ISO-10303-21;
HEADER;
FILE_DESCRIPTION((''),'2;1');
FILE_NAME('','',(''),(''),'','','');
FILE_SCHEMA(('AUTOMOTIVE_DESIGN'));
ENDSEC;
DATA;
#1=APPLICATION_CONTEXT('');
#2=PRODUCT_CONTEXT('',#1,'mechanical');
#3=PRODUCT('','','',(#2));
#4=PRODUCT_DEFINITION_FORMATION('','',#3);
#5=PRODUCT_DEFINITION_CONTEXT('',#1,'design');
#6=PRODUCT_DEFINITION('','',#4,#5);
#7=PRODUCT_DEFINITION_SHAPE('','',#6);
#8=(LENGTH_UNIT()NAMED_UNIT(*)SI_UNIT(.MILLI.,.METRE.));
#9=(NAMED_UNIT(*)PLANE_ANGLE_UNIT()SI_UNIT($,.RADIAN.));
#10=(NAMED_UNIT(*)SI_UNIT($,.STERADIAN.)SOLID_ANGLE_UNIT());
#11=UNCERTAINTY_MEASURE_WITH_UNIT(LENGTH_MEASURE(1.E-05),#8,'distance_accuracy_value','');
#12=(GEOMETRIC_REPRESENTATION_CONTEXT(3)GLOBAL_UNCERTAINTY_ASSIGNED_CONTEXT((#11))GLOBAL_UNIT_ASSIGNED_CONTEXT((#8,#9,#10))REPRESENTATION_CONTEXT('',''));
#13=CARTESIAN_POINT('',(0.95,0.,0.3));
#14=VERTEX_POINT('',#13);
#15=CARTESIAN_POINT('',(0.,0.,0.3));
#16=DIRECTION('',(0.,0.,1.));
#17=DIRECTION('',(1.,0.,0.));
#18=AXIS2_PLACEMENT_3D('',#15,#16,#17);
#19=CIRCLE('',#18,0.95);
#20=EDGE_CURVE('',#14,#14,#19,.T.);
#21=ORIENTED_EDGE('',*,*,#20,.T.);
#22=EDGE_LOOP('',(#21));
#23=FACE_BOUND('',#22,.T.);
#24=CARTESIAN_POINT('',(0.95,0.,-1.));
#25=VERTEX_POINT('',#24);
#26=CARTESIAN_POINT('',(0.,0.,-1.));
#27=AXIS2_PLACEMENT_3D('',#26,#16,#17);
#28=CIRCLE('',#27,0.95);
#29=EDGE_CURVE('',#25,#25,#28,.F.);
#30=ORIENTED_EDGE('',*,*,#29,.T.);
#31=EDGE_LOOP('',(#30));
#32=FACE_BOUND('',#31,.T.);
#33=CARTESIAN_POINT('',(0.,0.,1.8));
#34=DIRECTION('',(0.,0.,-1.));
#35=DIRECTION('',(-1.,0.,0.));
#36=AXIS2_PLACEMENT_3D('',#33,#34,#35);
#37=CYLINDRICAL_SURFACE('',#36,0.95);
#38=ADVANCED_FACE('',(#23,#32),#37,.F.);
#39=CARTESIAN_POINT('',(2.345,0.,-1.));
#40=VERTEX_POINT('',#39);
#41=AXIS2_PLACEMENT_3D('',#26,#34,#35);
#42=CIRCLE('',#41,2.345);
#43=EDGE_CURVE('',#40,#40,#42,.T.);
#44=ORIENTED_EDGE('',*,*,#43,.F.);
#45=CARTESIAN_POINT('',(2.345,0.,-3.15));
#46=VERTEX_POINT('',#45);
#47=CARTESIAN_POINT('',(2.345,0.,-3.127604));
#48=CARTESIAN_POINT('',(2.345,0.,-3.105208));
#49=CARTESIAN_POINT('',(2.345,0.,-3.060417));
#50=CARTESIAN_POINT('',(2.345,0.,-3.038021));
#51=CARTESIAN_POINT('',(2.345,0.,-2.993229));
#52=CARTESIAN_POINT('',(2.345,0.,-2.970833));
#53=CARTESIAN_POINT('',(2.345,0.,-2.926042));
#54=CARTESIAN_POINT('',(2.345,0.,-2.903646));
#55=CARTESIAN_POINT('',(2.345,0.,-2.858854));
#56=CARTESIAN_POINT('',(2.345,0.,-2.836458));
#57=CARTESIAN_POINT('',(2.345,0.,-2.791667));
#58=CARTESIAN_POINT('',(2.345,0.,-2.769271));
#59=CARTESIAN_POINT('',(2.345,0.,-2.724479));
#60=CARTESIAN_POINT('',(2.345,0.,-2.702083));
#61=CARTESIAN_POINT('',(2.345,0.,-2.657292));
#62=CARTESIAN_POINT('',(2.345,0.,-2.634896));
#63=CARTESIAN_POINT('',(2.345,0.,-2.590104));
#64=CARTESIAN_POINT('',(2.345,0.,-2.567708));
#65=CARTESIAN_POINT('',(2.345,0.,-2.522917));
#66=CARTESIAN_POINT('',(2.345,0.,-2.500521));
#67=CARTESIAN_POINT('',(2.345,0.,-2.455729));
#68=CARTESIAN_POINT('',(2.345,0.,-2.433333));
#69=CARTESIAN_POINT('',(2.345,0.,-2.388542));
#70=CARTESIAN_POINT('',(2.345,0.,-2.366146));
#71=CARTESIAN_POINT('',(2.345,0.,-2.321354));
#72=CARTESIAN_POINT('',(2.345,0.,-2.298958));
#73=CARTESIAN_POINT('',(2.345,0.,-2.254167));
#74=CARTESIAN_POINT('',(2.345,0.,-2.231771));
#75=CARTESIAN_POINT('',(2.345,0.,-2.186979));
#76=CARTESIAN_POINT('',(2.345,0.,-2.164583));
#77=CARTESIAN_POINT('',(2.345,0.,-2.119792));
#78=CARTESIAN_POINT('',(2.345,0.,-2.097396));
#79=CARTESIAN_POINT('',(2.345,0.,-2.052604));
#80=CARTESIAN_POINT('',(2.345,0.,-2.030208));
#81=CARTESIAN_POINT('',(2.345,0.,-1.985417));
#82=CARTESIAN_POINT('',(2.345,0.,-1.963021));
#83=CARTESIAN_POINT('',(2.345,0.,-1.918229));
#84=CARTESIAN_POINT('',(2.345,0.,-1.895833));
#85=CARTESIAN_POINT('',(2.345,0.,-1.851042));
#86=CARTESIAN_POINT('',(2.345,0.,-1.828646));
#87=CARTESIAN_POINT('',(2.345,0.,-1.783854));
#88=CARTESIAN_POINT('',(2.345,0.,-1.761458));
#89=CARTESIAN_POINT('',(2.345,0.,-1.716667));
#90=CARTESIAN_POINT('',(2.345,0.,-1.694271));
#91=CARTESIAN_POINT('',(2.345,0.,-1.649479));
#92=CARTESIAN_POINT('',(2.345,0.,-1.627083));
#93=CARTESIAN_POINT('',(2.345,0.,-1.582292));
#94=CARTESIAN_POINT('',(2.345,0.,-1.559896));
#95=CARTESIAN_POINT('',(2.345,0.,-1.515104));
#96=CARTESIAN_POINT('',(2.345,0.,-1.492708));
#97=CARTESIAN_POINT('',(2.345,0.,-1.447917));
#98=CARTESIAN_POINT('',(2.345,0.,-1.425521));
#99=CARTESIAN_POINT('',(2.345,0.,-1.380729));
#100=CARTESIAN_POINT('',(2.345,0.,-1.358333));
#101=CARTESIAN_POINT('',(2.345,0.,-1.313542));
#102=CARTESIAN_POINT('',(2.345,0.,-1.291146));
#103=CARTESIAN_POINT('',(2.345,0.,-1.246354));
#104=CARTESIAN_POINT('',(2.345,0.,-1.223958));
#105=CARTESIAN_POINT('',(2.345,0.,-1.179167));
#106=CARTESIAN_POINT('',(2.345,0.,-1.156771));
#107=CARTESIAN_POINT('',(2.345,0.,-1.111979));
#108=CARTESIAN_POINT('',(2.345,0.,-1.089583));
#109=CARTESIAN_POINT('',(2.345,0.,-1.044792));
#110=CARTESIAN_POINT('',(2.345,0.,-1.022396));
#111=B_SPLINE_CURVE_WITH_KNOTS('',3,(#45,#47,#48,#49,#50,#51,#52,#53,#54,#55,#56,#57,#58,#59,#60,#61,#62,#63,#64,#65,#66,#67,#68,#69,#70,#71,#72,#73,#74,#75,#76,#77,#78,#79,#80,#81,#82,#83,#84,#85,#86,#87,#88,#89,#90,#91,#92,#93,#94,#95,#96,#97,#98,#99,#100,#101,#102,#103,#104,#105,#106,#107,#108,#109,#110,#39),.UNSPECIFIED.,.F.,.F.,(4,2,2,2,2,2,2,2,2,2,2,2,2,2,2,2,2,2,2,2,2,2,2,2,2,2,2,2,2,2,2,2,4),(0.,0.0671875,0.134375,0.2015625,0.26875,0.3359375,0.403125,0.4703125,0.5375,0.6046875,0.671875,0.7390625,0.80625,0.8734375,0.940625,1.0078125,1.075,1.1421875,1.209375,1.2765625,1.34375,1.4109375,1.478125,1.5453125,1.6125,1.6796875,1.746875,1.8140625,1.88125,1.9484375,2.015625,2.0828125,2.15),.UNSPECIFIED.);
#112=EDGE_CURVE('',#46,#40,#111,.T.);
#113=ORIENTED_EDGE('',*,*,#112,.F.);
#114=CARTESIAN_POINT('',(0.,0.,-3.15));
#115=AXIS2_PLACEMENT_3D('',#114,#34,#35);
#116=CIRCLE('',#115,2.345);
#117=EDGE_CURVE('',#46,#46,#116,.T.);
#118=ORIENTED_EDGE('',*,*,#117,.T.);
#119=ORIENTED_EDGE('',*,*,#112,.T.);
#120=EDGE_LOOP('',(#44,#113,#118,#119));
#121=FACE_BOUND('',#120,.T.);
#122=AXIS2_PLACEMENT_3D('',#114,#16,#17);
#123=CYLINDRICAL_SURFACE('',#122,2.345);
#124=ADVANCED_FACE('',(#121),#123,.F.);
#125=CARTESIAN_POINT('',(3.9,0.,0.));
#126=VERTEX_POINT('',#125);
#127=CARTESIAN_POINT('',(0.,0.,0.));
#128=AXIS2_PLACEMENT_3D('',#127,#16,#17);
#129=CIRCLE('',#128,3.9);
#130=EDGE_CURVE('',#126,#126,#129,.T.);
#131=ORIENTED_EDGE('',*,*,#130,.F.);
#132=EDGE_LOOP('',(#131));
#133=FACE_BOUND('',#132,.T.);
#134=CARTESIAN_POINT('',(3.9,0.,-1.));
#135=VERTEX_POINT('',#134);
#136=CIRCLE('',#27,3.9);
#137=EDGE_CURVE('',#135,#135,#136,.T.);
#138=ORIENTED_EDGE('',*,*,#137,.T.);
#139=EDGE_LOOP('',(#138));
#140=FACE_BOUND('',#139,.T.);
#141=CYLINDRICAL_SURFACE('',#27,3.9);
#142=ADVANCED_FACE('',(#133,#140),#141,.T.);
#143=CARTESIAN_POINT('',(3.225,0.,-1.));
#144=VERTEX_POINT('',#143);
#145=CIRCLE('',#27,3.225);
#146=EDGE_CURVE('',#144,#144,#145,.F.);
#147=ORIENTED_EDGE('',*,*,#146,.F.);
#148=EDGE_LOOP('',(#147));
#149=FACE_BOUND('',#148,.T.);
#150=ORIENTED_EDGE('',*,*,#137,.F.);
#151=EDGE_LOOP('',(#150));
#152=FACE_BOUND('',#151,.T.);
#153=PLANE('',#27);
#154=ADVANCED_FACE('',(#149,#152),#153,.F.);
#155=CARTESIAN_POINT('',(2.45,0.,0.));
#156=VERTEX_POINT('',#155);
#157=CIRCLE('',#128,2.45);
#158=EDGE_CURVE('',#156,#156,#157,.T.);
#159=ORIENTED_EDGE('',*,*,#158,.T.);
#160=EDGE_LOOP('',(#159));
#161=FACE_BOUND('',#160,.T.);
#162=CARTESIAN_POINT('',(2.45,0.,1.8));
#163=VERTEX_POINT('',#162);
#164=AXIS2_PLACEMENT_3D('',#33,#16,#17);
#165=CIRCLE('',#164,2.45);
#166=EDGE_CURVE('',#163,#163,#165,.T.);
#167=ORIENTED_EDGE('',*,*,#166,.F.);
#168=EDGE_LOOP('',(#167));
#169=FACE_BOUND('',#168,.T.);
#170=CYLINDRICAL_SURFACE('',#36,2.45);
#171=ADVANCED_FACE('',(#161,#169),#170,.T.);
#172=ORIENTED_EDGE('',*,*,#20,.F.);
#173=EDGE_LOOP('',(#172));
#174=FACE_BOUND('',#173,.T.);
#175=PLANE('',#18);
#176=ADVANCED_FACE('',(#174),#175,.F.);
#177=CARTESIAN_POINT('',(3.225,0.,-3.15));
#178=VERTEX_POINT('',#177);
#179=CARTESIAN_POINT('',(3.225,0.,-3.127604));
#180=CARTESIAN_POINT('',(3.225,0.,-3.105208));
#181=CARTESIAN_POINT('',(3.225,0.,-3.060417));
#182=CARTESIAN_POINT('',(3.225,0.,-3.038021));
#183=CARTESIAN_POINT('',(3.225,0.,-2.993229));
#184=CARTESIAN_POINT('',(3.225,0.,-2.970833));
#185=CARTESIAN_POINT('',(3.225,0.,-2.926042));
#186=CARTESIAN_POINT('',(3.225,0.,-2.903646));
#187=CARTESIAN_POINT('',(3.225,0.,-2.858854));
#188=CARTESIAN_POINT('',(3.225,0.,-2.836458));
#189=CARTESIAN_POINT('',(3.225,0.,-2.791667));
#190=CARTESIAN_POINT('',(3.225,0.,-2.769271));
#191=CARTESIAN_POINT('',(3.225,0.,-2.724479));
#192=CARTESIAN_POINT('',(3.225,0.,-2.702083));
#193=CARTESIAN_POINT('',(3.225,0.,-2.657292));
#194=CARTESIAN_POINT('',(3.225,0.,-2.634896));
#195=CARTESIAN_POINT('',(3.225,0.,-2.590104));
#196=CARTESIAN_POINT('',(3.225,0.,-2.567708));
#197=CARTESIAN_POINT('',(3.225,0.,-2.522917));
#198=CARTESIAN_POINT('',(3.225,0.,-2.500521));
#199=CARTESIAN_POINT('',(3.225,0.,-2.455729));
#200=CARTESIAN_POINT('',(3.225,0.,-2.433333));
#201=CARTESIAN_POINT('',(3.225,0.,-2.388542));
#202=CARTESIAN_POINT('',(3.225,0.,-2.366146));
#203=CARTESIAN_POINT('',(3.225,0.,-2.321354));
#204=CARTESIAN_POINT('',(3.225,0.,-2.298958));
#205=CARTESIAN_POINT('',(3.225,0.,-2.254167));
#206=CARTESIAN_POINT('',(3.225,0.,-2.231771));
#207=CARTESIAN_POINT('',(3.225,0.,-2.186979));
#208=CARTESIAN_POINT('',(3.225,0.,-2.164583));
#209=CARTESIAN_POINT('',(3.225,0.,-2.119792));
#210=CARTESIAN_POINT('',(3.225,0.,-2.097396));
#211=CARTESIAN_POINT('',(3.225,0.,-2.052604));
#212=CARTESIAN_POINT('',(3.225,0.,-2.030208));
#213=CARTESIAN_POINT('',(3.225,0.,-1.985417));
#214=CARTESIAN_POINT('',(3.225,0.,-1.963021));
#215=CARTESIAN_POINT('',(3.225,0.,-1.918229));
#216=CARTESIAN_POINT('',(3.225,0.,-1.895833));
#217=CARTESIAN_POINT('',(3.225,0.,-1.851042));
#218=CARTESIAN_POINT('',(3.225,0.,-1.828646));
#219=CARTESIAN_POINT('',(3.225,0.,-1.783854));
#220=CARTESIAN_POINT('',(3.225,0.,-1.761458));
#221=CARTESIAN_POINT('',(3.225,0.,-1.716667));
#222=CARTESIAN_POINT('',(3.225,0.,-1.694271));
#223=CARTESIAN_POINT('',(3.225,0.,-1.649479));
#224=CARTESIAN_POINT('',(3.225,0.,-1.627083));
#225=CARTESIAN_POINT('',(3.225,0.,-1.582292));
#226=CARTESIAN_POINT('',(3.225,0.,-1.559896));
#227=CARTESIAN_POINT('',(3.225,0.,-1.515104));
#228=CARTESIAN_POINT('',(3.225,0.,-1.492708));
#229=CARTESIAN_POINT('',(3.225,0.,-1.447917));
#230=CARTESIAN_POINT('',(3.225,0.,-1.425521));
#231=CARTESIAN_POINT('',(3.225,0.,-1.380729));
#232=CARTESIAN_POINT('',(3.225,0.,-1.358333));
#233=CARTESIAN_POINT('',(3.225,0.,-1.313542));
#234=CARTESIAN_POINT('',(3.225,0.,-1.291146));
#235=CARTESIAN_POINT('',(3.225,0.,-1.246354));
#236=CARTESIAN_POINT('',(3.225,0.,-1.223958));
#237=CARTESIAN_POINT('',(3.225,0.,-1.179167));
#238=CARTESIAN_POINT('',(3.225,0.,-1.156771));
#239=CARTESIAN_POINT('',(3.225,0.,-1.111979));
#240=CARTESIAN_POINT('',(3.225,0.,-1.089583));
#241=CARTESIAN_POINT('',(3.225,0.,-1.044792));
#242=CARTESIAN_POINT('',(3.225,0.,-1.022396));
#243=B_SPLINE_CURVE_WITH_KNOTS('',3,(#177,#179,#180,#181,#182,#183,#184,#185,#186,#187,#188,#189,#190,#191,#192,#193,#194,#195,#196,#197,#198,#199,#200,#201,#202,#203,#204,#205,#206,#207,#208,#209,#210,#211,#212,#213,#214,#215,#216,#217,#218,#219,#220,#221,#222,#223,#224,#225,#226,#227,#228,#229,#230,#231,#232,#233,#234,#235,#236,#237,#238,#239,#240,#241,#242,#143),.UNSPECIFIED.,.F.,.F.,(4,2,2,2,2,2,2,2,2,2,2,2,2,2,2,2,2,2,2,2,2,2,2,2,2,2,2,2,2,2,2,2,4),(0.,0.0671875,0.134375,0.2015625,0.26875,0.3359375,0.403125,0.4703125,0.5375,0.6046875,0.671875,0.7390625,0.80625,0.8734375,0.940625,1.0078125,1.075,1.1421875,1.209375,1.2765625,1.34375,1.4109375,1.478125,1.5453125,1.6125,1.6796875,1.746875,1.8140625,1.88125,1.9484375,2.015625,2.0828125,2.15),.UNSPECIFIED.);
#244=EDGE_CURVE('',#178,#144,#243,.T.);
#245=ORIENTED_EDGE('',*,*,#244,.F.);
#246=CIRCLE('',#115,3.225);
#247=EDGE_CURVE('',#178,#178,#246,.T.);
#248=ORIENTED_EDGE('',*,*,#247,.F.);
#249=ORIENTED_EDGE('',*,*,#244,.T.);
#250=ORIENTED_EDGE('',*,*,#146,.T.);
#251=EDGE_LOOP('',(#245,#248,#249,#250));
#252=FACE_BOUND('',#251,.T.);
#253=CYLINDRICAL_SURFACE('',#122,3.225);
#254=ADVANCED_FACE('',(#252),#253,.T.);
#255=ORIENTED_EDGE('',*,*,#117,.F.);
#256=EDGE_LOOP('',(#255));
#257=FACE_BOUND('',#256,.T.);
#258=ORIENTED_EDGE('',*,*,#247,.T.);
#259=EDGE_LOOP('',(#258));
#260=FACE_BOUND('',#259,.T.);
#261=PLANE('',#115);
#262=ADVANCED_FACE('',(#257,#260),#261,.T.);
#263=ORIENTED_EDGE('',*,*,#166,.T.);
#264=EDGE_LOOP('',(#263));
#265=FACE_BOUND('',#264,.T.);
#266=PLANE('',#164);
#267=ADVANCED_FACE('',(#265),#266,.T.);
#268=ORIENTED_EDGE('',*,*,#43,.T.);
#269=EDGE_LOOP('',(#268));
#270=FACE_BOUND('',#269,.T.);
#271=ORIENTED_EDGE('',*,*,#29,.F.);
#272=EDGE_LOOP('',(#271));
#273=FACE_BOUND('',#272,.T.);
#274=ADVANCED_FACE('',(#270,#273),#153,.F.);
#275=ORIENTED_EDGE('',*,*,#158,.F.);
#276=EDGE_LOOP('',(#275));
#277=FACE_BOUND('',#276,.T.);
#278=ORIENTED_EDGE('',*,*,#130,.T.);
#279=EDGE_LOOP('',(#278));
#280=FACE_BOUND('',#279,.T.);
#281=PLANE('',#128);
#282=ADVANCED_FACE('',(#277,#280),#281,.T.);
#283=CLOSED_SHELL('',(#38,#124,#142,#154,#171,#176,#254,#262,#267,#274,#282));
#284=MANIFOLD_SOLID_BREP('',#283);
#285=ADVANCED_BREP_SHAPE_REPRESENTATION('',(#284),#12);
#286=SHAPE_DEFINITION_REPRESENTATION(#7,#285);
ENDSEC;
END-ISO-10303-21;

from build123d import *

# Parameters (mm, degrees)
SKETCH1_R           = 3.9
BOSS_EXTRUDE1_DEPTH = 1
SKETCH2_R           = 2.45
BOSS_EXTRUDE2_DEPTH = 1.8
SHELL1_START        = -1
SHELL1_OUTLINE_R    = 0.95
SHELL1_DEPTH        = 1.3
SKETCH3_R           = 3.225
SKETCH3_R_2         = 2.345
BOSS_EXTRUDE3_DEPTH = 2.15


# Read off the part's stored shape, not the designer's step: Shell1
with BuildPart() as part:
    # Sketch1 → Boss-Extrude1 (new body)
    with BuildSketch(Plane.XY):
        Circle(SKETCH1_R)
    extrude(amount=-BOSS_EXTRUDE1_DEPTH)

    # Sketch2 → Boss-Extrude2 (add)
    with BuildSketch(Plane.XY):
        Circle(SKETCH2_R)
    extrude(amount=BOSS_EXTRUDE2_DEPTH)

    # Shell1 outline → Shell1 (cut)
    with BuildSketch(Plane.XY.offset(SHELL1_START)):
        Circle(SHELL1_OUTLINE_R)
    extrude(amount=SHELL1_DEPTH, mode=Mode.SUBTRACT)

    # Sketch3 → Boss-Extrude3 (add)
    with BuildSketch(Plane(origin=(0, 0, -1), x_dir=(-1, 0, 0), z_dir=(0, 0, -1))):
        with Locations(Location((0, 0, 0), (0, 0, 180))):
            Circle(SKETCH3_R)
        with Locations(Location((0, 0, 0), (0, 0, 180))):
            Circle(SKETCH3_R_2, mode=Mode.SUBTRACT)
    extrude(amount=BOSS_EXTRUDE3_DEPTH)


solid = part.part
